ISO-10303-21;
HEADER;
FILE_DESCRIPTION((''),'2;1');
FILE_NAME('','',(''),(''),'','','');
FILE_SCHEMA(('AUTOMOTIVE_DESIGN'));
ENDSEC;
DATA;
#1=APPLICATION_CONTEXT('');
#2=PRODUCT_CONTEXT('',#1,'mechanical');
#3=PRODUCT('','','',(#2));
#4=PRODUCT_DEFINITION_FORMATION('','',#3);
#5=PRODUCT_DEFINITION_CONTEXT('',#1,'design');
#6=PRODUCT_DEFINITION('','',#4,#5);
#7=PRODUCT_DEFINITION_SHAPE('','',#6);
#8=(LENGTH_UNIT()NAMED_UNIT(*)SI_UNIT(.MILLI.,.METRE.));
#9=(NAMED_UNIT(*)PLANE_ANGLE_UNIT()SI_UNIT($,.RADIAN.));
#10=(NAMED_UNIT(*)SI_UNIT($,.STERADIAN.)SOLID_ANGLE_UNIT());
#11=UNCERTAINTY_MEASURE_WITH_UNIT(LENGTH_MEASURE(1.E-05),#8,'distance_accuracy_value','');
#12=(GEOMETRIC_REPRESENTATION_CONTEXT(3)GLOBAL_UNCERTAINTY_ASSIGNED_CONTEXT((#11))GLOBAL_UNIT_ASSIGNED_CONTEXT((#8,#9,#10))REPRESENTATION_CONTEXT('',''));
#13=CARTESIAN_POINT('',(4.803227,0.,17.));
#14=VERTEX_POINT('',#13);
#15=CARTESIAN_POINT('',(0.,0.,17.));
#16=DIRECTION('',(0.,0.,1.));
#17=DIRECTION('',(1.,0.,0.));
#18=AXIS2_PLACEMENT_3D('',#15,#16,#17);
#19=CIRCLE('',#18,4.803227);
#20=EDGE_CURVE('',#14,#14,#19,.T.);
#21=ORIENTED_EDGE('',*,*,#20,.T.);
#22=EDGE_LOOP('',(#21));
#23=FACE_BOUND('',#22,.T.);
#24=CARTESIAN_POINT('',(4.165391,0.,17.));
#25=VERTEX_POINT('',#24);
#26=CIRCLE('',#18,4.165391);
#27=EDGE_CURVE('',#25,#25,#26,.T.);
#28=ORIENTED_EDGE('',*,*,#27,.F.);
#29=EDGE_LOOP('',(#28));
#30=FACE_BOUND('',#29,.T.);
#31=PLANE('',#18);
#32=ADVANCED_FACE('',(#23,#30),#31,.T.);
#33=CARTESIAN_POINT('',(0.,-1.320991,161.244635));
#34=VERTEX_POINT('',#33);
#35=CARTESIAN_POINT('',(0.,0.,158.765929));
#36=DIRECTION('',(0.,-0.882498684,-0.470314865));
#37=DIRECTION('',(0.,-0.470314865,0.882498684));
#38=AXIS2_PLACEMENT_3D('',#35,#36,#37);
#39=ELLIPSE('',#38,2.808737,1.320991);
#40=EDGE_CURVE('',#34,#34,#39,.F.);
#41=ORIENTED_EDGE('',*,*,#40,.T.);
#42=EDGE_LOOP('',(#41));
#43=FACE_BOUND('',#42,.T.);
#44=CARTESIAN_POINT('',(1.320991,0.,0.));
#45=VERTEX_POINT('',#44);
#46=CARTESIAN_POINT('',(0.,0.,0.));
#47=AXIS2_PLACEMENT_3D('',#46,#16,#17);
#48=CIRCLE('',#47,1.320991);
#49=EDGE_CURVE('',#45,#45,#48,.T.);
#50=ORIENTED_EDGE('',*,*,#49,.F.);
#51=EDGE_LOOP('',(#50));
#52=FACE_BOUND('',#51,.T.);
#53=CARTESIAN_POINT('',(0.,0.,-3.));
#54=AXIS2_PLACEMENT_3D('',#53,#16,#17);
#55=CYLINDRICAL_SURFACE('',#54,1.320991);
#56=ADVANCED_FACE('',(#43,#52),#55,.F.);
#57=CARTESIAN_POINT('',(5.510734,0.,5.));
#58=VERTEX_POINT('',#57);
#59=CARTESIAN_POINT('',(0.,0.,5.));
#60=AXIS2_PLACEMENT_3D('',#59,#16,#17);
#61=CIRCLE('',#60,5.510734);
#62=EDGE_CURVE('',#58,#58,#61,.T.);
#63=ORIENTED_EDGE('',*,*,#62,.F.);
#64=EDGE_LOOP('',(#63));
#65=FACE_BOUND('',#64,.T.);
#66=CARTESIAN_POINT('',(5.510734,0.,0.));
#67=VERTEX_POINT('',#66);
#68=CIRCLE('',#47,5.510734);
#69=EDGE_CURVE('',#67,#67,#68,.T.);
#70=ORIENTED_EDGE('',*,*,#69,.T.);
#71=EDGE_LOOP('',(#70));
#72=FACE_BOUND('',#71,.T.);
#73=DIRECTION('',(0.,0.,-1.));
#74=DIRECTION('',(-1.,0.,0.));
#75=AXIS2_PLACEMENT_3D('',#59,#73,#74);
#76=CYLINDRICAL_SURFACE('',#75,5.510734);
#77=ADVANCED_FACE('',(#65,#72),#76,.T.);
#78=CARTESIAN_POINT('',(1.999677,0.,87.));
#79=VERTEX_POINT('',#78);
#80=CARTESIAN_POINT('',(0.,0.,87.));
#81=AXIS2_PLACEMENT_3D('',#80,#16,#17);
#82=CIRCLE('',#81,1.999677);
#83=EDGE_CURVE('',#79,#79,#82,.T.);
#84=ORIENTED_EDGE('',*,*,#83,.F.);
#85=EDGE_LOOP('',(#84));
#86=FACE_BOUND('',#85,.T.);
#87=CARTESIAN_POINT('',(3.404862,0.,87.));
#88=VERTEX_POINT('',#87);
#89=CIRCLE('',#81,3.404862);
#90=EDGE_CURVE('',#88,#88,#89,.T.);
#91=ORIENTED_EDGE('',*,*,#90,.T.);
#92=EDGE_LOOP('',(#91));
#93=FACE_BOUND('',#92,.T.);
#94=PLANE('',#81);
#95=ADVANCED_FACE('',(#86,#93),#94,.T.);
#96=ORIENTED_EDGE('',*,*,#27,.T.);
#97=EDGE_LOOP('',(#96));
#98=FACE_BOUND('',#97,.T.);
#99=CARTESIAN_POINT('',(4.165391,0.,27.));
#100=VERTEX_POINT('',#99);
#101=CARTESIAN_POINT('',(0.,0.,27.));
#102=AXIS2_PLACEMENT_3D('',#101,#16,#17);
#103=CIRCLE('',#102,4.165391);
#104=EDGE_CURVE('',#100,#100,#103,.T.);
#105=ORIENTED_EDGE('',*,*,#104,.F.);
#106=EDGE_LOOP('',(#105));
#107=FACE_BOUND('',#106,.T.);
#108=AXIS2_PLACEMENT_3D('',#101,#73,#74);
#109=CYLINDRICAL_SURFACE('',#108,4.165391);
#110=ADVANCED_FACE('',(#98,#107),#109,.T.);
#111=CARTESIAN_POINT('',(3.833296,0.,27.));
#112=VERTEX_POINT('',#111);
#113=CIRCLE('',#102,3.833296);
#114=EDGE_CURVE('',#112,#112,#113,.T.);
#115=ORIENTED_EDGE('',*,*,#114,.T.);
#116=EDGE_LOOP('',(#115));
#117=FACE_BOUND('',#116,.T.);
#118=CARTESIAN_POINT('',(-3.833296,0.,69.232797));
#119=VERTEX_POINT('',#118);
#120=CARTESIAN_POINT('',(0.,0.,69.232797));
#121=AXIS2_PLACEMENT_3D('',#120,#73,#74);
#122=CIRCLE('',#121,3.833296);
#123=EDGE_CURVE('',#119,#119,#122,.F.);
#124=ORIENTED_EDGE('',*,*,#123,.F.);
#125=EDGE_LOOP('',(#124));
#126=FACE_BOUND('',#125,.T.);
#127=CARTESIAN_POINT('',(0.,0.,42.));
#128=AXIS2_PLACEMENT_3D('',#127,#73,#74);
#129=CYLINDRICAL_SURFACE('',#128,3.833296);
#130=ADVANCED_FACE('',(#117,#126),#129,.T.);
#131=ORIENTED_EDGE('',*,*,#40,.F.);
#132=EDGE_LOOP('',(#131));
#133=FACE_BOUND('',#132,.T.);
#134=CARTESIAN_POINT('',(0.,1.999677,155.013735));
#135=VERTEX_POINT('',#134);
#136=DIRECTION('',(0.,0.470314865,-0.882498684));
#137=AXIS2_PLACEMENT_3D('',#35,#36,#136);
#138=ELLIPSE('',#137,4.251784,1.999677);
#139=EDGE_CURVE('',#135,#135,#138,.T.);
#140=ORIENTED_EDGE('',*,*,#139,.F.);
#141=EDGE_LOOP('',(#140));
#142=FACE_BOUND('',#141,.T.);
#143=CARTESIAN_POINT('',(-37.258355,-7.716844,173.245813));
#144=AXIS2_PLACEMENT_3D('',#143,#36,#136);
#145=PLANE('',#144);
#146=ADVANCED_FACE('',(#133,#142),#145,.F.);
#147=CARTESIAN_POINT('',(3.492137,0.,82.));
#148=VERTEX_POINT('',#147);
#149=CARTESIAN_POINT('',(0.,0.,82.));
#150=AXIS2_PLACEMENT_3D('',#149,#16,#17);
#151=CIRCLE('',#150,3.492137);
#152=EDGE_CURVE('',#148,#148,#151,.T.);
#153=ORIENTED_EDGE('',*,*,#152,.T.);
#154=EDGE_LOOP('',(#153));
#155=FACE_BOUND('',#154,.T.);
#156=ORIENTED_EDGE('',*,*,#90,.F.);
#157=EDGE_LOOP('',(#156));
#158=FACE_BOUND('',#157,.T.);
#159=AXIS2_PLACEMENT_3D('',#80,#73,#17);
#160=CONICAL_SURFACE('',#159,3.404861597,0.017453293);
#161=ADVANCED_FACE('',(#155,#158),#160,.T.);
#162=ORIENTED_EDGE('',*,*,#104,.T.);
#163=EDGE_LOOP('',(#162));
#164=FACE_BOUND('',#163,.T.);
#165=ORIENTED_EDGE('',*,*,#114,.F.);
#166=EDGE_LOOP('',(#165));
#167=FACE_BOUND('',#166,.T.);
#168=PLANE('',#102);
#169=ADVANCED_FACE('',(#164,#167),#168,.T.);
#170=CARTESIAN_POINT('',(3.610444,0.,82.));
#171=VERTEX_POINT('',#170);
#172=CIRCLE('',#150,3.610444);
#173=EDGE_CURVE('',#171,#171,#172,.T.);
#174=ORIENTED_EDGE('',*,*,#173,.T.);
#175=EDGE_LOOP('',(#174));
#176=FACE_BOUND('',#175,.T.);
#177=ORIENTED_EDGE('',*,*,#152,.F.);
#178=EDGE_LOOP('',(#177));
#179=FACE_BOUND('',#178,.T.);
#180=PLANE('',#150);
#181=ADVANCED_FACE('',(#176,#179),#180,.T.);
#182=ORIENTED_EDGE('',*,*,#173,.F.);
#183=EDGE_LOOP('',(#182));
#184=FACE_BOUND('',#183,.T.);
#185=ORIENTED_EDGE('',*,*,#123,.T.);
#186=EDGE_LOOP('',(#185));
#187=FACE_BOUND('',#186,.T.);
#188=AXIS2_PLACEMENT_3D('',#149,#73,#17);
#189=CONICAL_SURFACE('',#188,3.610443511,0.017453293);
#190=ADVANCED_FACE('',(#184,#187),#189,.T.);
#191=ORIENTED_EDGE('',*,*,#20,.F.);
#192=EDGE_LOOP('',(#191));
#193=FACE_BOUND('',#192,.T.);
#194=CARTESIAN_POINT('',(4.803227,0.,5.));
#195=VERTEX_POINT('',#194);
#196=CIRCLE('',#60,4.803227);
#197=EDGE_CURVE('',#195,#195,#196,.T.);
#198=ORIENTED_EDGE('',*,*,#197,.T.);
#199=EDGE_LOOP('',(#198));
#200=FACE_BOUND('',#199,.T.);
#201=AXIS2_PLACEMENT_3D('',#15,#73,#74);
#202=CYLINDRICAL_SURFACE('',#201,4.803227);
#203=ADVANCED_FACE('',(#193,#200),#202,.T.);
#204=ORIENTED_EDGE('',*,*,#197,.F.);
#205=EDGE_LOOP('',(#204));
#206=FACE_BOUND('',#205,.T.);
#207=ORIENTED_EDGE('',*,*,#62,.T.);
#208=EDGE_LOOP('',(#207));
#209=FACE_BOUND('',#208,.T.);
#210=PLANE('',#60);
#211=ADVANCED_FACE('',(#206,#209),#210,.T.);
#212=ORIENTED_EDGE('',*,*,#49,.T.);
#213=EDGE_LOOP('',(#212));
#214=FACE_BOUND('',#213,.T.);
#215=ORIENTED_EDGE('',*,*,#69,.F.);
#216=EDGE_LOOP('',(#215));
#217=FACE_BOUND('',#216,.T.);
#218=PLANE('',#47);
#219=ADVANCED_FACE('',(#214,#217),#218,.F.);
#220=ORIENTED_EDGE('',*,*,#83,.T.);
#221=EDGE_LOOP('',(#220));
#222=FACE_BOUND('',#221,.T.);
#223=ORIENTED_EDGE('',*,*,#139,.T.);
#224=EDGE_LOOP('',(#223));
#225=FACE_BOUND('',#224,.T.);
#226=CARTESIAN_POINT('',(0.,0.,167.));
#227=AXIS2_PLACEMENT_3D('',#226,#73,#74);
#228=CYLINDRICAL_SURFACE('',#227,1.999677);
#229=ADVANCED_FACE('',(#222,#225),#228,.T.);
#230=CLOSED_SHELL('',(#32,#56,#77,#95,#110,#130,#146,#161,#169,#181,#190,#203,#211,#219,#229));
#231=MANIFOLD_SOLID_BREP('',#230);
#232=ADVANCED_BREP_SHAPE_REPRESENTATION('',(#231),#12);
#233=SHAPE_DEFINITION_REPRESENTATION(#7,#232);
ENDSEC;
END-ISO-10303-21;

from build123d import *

# Parameters (mm, degrees)
SKETCH1_R           = 5.510734027
BOSS_EXTRUDE1_DEPTH = 5
SKETCH2_R           = 4.80322663
BOSS_EXTRUDE2_DEPTH = 12
SKETCH3_R           = 4.165391046
BOSS_EXTRUDE3_DEPTH = 10
SKETCH4_R           = 3.833295876
BOSS_EXTRUDE4_DEPTH = 15
SKETCH5_R           = 3.610443511
BOSS_EXTRUDE5_DEPTH = 40
SKETCH6_R           = 3.404861597
BOSS_EXTRUDE6_DEPTH = 5
DRAFT3_ANGLE        = 1
SKETCH7_R           = 1.999677314
BOSS_EXTRUDE7_DEPTH = 80
SKETCH8_R           = 1.320990831
CUT_EXTRUDE1_DEPTH  = 170
SKETCH9_W           = 6.196430892
SKETCH9_H           = 6.69100276
BOSS_EXTRUDE8_DEPTH = 5
CUT_EXTRUDE3_DEPTH  = 40


# Read off the part's stored shape, not the designer's step: Draft1
with BuildPart() as part:
    # Sketch1 → Boss-Extrude1 (new body)
    with BuildSketch(Plane.XY):
        Circle(SKETCH1_R)
    extrude(amount=BOSS_EXTRUDE1_DEPTH)

    # Sketch2 → Boss-Extrude2 (add)
    with BuildSketch(Plane.XY.offset(5)):
        Circle(SKETCH2_R)
    extrude(amount=BOSS_EXTRUDE2_DEPTH)

    # Sketch3 → Boss-Extrude3 (add)
    with BuildSketch(Plane.XY.offset(17)):
        Circle(SKETCH3_R)
    extrude(amount=BOSS_EXTRUDE3_DEPTH)

    # Sketch4 → Boss-Extrude4 (add)
    with BuildSketch(Plane.XY.offset(27)):
        Circle(SKETCH4_R)
    extrude(amount=BOSS_EXTRUDE4_DEPTH)

    # Sketch5 → Boss-Extrude5 (add)
    with BuildSketch(Plane.XY.offset(42)):
        Circle(SKETCH5_R)
    extrude(amount=BOSS_EXTRUDE5_DEPTH)

    # Draft1 outline → Draft1 (revolve)
    with BuildSketch(Plane.XZ):
        Polygon((3.833295876, 42), (3.833295876, 69.232796586), (3.610443511, 82), (3.610443511, 42), align=None)
    revolve(axis=Axis((0, 0, 0), (0, 0, 1)))

    # Sketch6 → Boss-Extrude6 (add)
    with BuildSketch(Plane.XY.offset(82)):
        Circle(SKETCH6_R)
    extrude(amount=BOSS_EXTRUDE6_DEPTH)

    # Draft3
    draft3_faces = [part.faces().sort_by_distance(p)[0] for p in [
        (-3.404861597, 0, 84.5),
    ]]
    draft(draft3_faces, Plane.XY.offset(87), DRAFT3_ANGLE)

    # Sketch7 → Boss-Extrude7 (add)
    with BuildSketch(Plane.XY.offset(87)):
        Circle(SKETCH7_R)
    extrude(amount=BOSS_EXTRUDE7_DEPTH)

    # Sketch8 → Cut-Extrude1 (cut)
    with BuildSketch(Plane.XY.offset(167)):
        Circle(SKETCH8_R)
    extrude(amount=-CUT_EXTRUDE1_DEPTH, mode=Mode.SUBTRACT)

    # Sketch9 → Boss-Extrude8 (add)
    with BuildSketch(Plane.XY.offset(167)):
        with Locations((-0.356570781, -0.45222472)):
            Rectangle(SKETCH9_W, SKETCH9_H)
    extrude(amount=BOSS_EXTRUDE8_DEPTH)

    # Sketch10 → Cut-Extrude3 (cut)
    with BuildSketch(Plane(origin=(2.741644665, 0, 0), x_dir=(0, 0, -1), z_dir=(1, 0, 0))):
        Polygon((-152.074864923, 3.565905239), (-141.864160289, 3.91336171), (-152.717774104, 10.240072861), (-183.049805068, 3.30023825), (-173.245812896, -7.716844209), align=None)
    extrude(amount=-CUT_EXTRUDE3_DEPTH, mode=Mode.SUBTRACT)


solid = part.part
